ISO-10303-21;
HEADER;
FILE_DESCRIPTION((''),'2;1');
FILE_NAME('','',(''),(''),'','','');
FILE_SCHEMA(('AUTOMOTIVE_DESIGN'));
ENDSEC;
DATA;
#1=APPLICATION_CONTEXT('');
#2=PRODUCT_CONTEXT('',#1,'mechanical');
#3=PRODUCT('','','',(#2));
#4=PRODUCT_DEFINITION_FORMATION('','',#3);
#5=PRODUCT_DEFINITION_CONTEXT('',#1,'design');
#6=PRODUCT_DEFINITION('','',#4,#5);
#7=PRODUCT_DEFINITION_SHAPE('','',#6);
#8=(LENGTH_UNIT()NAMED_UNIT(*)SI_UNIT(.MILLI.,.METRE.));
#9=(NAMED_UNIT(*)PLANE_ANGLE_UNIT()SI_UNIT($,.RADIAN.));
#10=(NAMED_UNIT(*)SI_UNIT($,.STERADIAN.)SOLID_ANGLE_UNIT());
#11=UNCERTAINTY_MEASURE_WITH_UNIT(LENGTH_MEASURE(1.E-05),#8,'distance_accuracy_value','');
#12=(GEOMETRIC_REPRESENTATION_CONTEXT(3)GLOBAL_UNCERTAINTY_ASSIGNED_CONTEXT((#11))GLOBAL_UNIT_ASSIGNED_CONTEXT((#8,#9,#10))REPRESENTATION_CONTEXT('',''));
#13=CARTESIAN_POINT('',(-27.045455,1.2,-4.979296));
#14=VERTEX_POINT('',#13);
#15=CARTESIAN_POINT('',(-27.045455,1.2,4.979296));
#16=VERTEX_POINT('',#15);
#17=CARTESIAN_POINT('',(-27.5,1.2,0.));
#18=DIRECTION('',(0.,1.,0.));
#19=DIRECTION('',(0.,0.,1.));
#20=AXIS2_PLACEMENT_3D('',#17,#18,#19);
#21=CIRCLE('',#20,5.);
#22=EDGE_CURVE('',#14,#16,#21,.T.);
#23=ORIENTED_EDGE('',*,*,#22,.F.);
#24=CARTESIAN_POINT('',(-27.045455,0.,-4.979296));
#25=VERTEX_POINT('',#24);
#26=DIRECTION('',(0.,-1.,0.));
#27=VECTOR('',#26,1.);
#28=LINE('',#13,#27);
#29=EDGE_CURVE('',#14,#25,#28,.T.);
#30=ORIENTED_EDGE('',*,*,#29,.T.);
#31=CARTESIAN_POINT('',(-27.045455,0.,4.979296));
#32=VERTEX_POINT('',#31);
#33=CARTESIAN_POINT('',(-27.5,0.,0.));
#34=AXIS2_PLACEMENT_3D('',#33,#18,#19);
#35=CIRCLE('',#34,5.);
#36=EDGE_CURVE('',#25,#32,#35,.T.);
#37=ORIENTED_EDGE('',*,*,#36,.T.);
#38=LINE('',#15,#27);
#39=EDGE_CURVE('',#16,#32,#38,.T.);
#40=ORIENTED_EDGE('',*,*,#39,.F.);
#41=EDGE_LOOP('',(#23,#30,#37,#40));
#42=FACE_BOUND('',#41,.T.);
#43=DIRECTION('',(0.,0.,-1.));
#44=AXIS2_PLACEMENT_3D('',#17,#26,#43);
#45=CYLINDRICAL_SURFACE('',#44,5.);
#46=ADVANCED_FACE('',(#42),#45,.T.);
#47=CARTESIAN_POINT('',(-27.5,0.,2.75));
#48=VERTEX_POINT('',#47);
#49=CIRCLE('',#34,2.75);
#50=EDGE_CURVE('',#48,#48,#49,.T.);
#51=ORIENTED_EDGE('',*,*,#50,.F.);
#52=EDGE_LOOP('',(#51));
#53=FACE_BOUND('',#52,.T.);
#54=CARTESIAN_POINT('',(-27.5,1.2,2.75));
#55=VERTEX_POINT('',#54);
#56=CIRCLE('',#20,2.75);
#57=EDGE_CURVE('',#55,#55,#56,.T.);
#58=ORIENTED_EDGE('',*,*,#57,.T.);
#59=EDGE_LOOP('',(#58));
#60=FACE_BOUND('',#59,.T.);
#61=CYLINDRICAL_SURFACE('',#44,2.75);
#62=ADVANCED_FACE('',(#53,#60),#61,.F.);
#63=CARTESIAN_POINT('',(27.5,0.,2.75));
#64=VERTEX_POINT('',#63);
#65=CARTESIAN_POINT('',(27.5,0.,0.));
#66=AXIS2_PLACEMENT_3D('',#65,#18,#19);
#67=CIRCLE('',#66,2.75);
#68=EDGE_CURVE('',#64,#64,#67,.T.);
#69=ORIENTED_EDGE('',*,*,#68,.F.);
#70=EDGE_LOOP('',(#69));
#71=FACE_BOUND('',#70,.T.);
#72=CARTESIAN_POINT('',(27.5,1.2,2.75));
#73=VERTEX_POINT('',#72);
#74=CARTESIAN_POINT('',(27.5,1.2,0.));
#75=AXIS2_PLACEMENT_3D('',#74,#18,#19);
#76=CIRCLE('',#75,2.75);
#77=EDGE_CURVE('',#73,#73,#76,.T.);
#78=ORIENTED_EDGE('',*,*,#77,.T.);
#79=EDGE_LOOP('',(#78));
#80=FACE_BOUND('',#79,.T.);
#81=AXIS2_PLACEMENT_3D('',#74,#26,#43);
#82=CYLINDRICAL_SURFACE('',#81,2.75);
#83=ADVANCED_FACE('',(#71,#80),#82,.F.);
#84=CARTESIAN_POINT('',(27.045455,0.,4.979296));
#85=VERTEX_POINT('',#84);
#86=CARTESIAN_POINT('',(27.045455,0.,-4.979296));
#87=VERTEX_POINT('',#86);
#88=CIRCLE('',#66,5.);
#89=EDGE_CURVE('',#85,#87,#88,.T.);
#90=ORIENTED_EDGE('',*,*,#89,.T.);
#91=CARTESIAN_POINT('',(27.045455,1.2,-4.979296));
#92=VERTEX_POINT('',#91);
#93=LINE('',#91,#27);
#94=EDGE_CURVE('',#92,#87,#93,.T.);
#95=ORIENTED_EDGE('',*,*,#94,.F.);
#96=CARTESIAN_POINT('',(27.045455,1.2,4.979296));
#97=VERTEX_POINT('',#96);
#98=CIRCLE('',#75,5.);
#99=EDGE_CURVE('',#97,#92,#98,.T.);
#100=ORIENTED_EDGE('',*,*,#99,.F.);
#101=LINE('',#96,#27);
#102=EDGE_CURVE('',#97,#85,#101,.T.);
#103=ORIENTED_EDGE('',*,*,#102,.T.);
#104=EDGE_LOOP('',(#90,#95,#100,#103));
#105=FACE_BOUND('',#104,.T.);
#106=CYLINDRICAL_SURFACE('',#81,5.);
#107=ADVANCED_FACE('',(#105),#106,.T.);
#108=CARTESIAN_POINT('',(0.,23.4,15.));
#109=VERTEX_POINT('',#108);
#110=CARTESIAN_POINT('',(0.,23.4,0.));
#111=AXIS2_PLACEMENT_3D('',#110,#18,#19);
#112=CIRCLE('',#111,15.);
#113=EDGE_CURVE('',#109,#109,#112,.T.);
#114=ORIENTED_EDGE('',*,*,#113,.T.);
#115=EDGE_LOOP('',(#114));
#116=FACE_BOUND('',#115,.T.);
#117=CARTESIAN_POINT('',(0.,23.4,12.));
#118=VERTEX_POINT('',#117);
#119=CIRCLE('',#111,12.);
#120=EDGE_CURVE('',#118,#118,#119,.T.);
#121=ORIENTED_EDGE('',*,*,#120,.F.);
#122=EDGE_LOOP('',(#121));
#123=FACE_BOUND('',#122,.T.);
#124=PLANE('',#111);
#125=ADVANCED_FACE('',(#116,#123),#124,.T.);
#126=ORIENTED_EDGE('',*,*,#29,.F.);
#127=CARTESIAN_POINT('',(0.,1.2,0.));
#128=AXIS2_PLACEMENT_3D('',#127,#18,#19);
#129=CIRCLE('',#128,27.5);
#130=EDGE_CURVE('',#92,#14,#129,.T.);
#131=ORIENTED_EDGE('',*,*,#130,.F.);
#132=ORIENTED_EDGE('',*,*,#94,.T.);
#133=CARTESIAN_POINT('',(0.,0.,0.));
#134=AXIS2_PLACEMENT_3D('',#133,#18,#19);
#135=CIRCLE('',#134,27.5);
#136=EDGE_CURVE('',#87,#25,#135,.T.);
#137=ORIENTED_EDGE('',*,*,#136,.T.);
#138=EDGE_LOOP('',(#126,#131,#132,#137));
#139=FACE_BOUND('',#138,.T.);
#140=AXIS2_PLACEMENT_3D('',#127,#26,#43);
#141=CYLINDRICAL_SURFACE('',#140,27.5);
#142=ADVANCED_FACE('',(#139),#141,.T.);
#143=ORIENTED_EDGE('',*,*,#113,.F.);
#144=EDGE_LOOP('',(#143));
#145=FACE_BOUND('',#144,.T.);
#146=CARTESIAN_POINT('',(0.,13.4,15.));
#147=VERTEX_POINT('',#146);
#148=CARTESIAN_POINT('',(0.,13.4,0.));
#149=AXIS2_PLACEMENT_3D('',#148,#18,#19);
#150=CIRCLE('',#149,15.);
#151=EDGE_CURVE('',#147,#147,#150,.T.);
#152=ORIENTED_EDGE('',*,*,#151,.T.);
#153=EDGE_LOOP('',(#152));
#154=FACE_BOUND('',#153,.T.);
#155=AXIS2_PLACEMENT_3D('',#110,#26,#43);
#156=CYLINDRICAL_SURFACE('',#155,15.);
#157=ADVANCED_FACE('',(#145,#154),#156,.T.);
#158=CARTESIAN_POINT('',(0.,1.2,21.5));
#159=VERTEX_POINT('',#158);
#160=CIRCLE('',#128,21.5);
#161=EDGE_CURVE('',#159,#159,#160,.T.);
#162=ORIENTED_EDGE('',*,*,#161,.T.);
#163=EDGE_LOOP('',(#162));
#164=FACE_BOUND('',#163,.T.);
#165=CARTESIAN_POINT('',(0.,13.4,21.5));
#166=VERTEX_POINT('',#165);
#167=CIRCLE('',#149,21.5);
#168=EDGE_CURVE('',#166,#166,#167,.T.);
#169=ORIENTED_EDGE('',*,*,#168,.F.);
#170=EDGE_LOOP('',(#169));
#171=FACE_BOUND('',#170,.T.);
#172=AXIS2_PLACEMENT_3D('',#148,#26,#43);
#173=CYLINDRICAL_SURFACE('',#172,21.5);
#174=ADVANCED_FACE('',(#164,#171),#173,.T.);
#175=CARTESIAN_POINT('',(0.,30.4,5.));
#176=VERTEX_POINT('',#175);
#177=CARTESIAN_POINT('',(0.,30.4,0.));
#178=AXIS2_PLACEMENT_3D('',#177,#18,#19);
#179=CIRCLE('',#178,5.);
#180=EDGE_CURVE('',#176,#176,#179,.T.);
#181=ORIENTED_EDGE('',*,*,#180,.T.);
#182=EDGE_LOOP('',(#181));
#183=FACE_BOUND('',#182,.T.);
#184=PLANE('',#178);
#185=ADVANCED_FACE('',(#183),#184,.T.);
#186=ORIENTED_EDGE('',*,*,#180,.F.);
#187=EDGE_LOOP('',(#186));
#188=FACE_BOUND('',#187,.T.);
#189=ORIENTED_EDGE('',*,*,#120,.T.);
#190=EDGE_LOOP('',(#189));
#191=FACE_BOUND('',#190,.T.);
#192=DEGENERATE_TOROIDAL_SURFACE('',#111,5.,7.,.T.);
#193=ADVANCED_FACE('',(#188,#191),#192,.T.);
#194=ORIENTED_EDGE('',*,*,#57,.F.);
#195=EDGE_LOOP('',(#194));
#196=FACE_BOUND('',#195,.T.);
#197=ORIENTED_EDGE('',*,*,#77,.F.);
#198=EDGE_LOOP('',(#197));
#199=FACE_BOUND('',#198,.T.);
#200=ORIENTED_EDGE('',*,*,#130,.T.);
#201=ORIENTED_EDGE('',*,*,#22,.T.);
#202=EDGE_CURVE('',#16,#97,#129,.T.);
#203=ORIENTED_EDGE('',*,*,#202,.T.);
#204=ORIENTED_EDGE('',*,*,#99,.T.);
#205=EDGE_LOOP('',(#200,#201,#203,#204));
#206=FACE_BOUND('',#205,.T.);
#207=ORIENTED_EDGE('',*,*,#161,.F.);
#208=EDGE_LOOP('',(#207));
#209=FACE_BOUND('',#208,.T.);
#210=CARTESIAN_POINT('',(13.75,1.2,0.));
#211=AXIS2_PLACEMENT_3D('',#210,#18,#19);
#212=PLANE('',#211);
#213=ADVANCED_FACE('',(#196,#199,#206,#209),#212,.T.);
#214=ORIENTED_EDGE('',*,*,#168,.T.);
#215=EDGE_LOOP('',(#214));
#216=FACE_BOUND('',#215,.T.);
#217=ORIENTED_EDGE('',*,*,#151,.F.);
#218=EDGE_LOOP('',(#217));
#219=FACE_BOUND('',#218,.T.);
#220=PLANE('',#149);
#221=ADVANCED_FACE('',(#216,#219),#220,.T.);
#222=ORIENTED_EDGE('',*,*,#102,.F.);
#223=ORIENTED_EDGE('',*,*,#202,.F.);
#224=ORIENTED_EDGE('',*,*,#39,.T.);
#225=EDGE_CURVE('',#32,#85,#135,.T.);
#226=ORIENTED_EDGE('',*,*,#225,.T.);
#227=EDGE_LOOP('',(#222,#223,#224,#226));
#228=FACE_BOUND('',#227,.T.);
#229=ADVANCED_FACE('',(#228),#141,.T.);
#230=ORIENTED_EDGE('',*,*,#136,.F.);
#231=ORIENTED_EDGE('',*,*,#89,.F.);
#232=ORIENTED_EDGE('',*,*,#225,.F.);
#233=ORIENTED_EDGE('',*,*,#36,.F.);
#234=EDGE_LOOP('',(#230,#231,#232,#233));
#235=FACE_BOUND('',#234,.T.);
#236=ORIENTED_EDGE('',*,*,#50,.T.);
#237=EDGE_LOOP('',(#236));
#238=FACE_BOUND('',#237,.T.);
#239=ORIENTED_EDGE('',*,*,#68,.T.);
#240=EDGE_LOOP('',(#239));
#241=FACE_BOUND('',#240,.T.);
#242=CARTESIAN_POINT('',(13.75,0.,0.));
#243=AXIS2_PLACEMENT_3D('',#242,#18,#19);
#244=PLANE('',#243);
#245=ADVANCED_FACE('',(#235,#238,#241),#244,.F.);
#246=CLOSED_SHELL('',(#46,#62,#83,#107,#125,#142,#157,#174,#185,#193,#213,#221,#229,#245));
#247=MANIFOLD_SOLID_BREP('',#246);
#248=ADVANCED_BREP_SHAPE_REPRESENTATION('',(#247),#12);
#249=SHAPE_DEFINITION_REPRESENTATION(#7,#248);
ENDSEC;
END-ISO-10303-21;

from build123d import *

# Parameters (mm, degrees)
SKETCH1_R           = 2.75
BOSS_EXTRUDE1_DEPTH = 1.2
SKETCH2_R           = 21.5
BOSS_EXTRUDE2_DEPTH = 12.2
SKETCH3_R           = 15
BOSS_EXTRUDE3_DEPTH = 10
SKETCH5_R           = 12
BOSS_EXTRUDE4_DEPTH = 7
FILLET1_R           = 7


with BuildPart() as part:
    # Sketch1 → Boss-Extrude1 (new body)
    with BuildSketch(Plane(origin=(0, 0, 0), x_dir=(1, 0, 0), z_dir=(0, 1, 0))):
        with BuildLine():
            ThreePointArc((-27.045454545, -4.979295977), (0, -27.5), (27.045454545, -4.979295977))
            ThreePointArc((27.045454545, -4.979295977), (32.5, 0), (27.045454545, 4.979295977))
            ThreePointArc((27.045454545, 4.979295977), (0, 27.5), (-27.045454545, 4.979295977))
            ThreePointArc((-27.045454545, 4.979295977), (-32.5, 0), (-27.045454545, -4.979295977))
        make_face()
        with Locations(Location((-27.5, 0, 0), (0, 0, 270))):
            Circle(SKETCH1_R, mode=Mode.SUBTRACT)
        with Locations(Location((27.5, 0, 0), (0, 0, 270))):
            Circle(SKETCH1_R, mode=Mode.SUBTRACT)
    extrude(amount=BOSS_EXTRUDE1_DEPTH)

    # Sketch2 → Boss-Extrude2 (add)
    with BuildSketch(Plane(origin=(0, 1.2, 0), x_dir=(1, 0, 0), z_dir=(0, 1, 0))):
        with Locations(Location((0, 0, 0), (0, 0, 270))):
            Circle(SKETCH2_R)
    extrude(amount=BOSS_EXTRUDE2_DEPTH)

    # Sketch3 → Boss-Extrude3 (add)
    with BuildSketch(Plane(origin=(0, 13.4, 0), x_dir=(1, 0, 0), z_dir=(0, 1, 0))):
        with Locations(Location((0, 0, 0), (0, 0, 270))):
            Circle(SKETCH3_R)
    extrude(amount=BOSS_EXTRUDE3_DEPTH)

    # Sketch5 → Boss-Extrude4 (add)
    with BuildSketch(Plane(origin=(0, 23.4, 0), x_dir=(1, 0, 0), z_dir=(0, 1, 0))):
        with Locations(Location((0, 0, 0), (0, 0, 270))):
            Circle(SKETCH5_R)
    extrude(amount=BOSS_EXTRUDE4_DEPTH)

    # Fillet1
    fillet1_edges = [part.edges().sort_by_distance(p)[0] for p in [
        (0, 30.4, -12),
    ]]
    fillet(fillet1_edges, radius=FILLET1_R - 0.0001)  # a hair under: the kernel refuses the full size


solid = part.part
